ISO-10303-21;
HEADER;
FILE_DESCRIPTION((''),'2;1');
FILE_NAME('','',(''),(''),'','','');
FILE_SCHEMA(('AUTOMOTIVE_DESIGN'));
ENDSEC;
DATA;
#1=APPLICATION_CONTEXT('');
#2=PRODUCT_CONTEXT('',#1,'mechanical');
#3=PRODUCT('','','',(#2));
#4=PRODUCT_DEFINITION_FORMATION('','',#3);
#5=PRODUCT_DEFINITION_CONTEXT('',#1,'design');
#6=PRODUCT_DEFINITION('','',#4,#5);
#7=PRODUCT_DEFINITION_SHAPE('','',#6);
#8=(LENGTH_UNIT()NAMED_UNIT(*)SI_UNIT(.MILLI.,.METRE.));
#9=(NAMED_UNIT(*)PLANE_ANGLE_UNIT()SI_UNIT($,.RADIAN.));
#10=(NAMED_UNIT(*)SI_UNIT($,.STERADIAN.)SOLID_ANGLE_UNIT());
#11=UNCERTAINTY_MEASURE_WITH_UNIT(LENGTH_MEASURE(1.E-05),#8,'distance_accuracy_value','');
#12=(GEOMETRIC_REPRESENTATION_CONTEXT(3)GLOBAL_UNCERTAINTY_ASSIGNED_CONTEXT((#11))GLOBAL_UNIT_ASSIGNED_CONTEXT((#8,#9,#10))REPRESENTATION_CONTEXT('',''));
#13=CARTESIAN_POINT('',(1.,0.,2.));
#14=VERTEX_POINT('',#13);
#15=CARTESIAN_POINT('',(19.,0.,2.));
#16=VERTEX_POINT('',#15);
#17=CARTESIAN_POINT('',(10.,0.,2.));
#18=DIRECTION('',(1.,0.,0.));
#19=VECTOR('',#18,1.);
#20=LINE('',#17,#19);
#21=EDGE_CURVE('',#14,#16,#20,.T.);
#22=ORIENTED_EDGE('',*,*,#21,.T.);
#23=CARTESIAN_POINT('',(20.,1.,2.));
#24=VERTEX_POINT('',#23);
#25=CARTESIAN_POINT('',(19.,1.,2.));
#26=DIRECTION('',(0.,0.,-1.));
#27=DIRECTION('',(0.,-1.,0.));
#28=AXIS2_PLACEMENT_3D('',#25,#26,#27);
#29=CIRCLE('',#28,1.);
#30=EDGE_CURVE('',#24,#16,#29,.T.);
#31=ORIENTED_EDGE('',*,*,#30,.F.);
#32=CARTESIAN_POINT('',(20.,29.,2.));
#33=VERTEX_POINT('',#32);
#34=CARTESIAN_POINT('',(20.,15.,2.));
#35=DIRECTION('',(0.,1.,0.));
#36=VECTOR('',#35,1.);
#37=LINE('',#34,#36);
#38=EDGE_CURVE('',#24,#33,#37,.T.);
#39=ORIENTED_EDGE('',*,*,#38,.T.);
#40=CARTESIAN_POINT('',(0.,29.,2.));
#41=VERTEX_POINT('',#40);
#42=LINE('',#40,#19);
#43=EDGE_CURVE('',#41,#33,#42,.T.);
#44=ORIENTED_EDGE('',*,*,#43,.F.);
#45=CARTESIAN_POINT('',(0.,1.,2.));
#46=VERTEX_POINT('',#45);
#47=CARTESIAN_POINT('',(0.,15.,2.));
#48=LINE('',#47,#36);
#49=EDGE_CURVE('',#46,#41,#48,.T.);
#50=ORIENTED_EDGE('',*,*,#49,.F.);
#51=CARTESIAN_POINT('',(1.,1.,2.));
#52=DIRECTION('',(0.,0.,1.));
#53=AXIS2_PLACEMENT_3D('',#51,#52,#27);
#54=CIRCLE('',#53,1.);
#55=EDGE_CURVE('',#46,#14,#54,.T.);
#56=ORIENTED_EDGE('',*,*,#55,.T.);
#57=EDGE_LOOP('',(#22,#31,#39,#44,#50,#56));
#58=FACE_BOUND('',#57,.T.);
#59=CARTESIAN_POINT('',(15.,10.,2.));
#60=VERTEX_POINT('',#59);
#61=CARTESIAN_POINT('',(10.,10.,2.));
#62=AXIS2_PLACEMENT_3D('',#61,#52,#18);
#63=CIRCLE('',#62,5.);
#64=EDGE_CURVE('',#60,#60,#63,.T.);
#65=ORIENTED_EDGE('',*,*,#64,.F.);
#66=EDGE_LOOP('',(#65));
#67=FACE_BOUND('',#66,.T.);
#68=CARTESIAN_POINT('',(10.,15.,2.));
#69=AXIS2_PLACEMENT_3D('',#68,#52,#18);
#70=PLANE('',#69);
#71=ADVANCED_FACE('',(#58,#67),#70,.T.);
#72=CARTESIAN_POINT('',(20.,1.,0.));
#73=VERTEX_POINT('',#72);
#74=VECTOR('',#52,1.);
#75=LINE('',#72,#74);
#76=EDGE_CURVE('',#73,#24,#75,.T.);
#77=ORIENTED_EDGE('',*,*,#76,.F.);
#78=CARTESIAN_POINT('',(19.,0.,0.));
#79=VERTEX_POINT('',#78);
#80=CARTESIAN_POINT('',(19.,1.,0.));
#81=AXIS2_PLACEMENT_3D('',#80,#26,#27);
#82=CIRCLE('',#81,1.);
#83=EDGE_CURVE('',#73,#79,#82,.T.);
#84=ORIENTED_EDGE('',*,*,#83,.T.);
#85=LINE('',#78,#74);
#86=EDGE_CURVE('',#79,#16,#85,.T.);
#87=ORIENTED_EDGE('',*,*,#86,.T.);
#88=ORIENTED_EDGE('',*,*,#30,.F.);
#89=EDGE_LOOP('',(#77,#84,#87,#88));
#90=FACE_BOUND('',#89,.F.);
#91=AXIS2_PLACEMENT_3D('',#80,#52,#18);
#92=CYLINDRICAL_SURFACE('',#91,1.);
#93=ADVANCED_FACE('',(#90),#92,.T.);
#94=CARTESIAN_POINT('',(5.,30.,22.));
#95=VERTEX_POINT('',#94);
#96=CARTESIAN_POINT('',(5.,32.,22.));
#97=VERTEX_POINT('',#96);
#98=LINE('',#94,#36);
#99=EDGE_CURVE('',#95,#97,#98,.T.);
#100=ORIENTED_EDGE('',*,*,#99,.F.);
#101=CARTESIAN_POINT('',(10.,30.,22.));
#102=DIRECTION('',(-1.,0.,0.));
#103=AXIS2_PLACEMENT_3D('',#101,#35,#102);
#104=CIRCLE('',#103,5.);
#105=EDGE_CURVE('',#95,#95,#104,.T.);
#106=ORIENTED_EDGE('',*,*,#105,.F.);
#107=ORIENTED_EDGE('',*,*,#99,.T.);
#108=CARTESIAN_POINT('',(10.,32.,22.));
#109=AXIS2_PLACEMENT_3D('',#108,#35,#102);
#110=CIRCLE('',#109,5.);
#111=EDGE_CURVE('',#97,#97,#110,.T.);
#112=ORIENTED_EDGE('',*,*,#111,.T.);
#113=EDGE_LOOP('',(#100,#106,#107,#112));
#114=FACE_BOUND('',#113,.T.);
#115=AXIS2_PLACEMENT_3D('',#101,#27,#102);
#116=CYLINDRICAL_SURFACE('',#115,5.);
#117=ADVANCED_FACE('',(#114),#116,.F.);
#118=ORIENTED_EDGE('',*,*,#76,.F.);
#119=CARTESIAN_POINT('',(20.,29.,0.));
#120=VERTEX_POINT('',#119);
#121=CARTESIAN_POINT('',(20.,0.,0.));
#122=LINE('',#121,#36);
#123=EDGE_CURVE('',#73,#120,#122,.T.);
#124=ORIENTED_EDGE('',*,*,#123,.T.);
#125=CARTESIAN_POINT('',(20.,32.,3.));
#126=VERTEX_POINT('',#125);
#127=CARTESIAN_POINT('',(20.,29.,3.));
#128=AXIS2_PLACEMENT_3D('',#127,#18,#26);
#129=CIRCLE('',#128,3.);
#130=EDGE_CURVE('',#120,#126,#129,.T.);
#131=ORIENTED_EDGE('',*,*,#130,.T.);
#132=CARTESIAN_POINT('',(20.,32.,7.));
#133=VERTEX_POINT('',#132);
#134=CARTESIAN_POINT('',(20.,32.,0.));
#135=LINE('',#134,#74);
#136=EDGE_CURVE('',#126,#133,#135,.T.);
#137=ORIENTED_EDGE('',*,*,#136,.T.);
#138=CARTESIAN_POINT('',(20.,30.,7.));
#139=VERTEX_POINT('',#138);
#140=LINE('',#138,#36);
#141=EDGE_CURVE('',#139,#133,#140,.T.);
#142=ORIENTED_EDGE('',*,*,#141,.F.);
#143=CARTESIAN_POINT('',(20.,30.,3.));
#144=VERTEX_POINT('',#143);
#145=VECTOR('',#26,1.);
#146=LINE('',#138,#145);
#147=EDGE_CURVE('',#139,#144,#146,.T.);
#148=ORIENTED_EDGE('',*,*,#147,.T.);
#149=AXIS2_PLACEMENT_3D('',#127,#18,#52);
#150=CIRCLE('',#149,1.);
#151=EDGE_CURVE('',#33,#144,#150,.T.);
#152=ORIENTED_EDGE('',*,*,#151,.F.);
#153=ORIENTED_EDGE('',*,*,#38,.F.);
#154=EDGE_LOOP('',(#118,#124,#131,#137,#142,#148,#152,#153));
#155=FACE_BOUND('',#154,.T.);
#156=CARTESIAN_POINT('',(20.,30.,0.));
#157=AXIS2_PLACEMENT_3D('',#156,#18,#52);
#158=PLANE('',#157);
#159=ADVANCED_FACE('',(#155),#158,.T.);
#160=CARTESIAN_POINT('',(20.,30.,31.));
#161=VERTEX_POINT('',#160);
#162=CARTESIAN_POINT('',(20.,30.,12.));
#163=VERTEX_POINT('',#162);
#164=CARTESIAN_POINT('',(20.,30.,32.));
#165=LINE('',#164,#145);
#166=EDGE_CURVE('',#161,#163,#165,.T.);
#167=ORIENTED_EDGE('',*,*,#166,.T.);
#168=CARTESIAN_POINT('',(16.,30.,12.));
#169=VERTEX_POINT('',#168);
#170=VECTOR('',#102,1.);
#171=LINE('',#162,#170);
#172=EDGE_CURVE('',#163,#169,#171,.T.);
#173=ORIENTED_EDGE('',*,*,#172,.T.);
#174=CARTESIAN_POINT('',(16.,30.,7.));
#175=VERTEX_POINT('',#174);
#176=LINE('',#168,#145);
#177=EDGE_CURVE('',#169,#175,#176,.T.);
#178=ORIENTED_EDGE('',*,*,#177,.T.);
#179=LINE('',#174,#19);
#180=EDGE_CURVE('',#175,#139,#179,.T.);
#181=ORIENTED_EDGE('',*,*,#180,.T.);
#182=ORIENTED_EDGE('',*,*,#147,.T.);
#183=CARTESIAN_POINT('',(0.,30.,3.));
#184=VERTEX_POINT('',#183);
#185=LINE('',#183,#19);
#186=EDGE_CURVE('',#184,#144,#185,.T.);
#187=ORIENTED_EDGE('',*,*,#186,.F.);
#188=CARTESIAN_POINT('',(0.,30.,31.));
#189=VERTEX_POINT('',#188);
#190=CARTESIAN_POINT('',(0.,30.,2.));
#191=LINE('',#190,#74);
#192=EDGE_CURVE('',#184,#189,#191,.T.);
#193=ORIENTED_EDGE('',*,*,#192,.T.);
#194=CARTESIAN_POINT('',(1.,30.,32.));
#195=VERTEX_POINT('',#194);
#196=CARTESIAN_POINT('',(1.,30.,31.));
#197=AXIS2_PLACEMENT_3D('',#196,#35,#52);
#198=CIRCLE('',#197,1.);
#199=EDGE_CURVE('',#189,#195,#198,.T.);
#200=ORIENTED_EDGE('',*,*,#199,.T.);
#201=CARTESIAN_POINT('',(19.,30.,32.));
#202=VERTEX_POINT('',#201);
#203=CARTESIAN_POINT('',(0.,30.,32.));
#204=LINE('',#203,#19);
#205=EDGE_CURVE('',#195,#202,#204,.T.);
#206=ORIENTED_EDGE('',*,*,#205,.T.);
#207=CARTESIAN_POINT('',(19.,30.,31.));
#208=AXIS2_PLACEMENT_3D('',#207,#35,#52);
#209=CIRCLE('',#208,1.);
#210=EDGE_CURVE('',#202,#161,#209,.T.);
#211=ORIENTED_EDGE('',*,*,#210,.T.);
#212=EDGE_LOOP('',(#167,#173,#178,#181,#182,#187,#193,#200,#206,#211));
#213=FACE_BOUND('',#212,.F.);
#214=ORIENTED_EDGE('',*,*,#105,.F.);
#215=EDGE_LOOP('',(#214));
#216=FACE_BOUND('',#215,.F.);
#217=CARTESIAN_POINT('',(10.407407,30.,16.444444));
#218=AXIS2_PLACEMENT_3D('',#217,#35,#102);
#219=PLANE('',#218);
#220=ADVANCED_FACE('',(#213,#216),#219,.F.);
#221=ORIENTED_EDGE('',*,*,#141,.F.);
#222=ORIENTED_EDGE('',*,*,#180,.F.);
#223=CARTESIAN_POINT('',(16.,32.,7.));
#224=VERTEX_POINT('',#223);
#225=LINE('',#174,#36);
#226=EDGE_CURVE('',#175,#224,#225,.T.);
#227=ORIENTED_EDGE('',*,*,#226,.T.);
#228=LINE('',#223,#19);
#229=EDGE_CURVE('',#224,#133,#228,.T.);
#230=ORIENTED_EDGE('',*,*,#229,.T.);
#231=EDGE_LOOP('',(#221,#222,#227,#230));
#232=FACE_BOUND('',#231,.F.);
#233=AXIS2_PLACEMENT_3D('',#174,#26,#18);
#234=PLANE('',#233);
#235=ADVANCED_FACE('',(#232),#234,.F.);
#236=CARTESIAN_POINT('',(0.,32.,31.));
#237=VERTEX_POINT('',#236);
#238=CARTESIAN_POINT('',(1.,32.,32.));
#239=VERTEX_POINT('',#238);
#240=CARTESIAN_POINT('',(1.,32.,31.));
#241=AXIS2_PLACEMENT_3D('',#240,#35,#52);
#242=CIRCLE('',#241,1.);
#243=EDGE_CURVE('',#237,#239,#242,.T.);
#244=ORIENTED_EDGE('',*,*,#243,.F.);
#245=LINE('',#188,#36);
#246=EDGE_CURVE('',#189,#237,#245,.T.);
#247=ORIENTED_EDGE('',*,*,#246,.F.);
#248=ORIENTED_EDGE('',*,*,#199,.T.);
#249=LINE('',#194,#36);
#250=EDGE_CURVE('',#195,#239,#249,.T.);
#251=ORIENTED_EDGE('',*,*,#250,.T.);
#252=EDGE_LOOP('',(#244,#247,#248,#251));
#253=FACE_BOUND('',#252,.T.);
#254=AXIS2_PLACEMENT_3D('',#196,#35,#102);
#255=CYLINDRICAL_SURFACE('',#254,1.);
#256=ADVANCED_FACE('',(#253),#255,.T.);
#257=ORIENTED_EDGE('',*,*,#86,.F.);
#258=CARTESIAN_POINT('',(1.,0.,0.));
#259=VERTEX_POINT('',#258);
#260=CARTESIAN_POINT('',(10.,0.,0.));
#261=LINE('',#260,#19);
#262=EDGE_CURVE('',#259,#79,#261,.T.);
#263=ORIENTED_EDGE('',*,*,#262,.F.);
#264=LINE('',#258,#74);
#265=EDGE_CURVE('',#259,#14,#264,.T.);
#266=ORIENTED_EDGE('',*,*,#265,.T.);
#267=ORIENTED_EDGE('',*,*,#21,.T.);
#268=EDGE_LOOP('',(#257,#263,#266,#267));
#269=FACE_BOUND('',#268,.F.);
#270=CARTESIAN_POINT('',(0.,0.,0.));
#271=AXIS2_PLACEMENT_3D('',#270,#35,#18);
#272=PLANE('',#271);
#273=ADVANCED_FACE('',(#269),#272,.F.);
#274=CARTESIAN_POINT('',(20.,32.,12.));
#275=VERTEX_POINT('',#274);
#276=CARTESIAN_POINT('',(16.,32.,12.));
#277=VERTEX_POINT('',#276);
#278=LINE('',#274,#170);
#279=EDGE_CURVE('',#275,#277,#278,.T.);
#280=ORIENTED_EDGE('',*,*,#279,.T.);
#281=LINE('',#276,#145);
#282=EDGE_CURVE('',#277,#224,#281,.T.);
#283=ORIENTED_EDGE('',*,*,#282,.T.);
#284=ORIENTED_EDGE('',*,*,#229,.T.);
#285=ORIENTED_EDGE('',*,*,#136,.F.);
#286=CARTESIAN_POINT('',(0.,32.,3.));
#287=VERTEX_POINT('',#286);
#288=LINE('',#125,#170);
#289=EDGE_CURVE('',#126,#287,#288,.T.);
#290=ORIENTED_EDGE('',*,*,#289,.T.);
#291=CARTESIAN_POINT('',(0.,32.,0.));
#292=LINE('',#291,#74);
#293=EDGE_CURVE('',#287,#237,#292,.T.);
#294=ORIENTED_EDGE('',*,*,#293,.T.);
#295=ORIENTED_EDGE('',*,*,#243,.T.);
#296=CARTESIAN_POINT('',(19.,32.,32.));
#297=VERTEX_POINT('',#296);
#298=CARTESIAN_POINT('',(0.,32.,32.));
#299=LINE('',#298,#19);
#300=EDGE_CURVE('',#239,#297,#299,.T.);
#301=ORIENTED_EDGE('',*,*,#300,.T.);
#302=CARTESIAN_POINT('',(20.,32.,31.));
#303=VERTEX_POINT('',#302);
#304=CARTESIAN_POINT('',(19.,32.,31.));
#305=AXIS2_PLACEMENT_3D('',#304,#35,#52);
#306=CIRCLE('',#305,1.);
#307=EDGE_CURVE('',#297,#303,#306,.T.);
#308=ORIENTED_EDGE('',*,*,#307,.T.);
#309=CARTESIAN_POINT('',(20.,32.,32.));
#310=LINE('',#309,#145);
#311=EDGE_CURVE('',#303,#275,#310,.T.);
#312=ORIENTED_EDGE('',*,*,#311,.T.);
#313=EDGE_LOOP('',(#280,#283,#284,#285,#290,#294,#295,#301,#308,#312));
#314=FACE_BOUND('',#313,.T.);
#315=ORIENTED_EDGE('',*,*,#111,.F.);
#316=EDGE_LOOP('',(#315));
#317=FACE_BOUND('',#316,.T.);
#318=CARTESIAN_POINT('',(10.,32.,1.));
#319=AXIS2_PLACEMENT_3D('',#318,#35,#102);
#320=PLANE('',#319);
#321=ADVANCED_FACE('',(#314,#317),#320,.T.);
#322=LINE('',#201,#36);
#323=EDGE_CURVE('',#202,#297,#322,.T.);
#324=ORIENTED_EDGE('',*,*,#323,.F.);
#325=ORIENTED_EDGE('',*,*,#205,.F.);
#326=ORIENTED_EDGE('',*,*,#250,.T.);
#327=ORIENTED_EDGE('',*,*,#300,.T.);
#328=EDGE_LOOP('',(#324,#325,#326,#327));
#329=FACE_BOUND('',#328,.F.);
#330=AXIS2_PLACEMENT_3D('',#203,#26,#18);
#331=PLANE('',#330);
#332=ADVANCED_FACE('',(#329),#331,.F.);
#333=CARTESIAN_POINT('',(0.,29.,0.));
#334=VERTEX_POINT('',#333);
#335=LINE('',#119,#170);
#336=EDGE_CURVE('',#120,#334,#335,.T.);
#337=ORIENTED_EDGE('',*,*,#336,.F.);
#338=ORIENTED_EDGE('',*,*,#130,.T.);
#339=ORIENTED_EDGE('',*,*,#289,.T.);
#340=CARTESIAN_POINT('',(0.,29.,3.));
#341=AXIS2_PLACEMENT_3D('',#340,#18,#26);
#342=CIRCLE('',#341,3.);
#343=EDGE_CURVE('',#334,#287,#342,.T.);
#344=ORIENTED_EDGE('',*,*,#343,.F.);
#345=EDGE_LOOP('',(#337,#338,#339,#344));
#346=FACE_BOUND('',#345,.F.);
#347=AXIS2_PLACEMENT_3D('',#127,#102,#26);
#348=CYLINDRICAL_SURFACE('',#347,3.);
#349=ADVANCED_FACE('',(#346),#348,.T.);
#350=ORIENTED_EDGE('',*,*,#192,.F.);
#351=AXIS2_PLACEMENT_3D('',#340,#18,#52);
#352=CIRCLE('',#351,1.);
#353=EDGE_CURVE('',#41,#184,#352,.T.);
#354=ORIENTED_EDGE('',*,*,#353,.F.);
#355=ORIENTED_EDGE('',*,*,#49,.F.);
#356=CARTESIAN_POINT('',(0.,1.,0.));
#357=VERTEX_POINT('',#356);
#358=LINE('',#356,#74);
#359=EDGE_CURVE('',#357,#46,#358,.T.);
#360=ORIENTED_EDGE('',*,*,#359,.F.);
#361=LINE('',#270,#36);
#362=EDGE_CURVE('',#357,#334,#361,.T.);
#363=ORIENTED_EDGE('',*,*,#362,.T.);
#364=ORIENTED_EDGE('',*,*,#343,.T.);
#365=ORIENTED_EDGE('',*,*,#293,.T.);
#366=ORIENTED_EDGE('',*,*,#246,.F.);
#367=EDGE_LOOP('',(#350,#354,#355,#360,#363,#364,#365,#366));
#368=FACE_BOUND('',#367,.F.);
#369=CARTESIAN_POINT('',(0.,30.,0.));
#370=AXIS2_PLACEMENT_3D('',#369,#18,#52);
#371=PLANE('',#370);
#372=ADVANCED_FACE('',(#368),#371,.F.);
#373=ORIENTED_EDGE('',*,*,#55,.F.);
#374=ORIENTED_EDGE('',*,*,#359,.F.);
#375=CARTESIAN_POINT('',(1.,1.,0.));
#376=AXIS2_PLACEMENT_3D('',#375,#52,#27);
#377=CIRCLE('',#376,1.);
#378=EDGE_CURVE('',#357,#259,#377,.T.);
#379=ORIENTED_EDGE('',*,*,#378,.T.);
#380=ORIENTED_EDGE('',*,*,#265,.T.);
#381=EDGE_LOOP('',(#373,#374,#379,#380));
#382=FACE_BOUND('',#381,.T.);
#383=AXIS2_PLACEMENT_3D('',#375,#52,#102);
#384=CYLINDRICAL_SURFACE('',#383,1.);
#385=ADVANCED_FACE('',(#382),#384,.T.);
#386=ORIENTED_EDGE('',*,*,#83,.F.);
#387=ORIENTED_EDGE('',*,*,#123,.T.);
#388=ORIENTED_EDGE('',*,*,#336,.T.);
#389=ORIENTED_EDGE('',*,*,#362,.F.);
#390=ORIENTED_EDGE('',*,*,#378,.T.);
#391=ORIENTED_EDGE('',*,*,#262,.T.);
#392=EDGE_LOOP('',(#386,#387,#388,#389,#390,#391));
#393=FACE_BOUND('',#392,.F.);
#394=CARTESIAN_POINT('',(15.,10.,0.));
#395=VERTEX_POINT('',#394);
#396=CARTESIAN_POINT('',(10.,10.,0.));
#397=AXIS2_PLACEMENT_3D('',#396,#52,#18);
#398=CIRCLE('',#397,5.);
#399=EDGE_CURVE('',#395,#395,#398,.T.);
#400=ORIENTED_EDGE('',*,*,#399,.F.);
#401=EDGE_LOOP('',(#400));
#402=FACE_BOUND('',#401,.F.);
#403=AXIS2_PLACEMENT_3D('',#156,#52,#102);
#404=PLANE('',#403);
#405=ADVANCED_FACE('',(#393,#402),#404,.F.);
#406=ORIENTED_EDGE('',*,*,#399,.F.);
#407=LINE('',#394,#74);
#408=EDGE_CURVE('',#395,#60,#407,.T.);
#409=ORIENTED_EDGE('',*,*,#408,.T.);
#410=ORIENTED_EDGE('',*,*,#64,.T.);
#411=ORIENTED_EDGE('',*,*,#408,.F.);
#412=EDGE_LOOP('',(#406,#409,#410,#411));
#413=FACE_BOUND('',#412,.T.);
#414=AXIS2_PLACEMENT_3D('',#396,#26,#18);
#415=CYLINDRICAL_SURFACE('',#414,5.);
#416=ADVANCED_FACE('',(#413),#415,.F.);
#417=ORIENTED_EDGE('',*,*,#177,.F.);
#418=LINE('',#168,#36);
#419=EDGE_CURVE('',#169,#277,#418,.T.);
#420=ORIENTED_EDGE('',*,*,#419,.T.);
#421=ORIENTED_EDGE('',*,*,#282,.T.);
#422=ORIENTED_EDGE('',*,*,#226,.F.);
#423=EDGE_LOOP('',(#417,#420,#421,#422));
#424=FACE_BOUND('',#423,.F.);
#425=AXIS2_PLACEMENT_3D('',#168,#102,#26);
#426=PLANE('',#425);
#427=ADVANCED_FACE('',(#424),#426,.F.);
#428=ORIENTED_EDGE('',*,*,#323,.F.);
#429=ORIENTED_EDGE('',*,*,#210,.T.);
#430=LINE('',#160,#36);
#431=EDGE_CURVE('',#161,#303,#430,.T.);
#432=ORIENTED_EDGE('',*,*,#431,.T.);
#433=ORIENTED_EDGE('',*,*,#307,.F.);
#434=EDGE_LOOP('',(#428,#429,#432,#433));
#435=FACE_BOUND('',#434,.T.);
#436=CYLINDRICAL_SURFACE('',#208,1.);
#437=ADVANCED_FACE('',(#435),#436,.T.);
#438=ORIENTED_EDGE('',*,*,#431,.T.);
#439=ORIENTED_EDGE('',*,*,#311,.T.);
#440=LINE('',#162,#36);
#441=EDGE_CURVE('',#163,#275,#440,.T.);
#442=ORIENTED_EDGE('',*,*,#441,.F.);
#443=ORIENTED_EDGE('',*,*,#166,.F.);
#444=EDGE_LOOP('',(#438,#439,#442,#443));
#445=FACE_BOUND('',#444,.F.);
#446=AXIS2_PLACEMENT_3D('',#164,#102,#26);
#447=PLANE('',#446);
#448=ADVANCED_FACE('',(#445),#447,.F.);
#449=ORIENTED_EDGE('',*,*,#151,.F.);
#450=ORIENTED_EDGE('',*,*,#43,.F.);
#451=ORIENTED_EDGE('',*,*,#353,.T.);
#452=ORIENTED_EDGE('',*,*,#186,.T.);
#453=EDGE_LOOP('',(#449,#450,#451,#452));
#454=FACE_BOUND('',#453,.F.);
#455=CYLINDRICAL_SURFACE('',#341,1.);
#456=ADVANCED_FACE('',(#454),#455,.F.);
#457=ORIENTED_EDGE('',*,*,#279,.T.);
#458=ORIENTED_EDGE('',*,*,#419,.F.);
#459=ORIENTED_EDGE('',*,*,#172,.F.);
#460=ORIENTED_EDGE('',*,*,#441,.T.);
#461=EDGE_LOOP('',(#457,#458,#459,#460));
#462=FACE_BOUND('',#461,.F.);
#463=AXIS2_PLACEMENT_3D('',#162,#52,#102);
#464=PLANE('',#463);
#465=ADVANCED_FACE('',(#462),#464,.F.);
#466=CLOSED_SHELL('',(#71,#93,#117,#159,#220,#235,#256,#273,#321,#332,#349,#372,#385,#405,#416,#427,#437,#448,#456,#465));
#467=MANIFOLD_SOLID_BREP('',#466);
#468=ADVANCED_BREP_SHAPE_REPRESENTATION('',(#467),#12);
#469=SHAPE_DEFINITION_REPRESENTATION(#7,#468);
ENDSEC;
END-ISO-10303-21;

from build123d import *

# Parameters (mm, degrees)
F0_W     = 20
F0_H     = 30
F0_R     = 5
F1_DEPTH = 2
F2_R     = 5
F3_DEPTH = 2
F4_W     = 20
F4_H     = 2
F5_DEPTH = 2
F6_R     = 1
F7_R     = 1
F8_R     = 3


with BuildPart() as f1:
    # F0 (on Top) → F1 (new body)
    with BuildSketch(Plane.XY):
        with Locations((10, 15)):
            Rectangle(F0_W, F0_H)
        with Locations((10, 10)):
            Circle(F0_R, mode=Mode.SUBTRACT)
    extrude(amount=F1_DEPTH)

    # F2 (on face) → F3 (join)
    with BuildSketch(Plane(origin=(0, 30, 0), x_dir=(-1, 0, 0), z_dir=(0, 1, 0))):
        Polygon((-20, 7), (-20, 2), (0, 2), (0, 32), (-20, 32), (-20, 12), (-16, 12), (-16, 7), align=None)
        with Locations((-10, 22)):
            Circle(F2_R, mode=Mode.SUBTRACT)
    extrude(amount=F3_DEPTH)

    # F4 (on face) → F5 (join)
    with BuildSketch(Plane(origin=(0, 30, 0), x_dir=(-1, 0, 0), z_dir=(0, 1, 0))):
        with Locations((-10, 1)):
            Rectangle(F4_W, F4_H)
    extrude(amount=F5_DEPTH)

    # F6
    f6_edges = [f1.edges().sort_by_distance(p)[0] for p in [
        (20, 0, 1),
        (0, 0, 1),
        (20, 31, 32),
        (0, 31, 32),
    ]]
    fillet(f6_edges, radius=F6_R)

    # F7
    f7_edges = [f1.edges().sort_by_distance(p)[0] for p in [
        (10, 30, 2),
    ]]
    fillet(f7_edges, radius=F7_R)

    # F8
    f8_edges = [f1.edges().sort_by_distance(p)[0] for p in [
        (10, 32, 0),
    ]]
    fillet(f8_edges, radius=F8_R)


solid = f1.part
